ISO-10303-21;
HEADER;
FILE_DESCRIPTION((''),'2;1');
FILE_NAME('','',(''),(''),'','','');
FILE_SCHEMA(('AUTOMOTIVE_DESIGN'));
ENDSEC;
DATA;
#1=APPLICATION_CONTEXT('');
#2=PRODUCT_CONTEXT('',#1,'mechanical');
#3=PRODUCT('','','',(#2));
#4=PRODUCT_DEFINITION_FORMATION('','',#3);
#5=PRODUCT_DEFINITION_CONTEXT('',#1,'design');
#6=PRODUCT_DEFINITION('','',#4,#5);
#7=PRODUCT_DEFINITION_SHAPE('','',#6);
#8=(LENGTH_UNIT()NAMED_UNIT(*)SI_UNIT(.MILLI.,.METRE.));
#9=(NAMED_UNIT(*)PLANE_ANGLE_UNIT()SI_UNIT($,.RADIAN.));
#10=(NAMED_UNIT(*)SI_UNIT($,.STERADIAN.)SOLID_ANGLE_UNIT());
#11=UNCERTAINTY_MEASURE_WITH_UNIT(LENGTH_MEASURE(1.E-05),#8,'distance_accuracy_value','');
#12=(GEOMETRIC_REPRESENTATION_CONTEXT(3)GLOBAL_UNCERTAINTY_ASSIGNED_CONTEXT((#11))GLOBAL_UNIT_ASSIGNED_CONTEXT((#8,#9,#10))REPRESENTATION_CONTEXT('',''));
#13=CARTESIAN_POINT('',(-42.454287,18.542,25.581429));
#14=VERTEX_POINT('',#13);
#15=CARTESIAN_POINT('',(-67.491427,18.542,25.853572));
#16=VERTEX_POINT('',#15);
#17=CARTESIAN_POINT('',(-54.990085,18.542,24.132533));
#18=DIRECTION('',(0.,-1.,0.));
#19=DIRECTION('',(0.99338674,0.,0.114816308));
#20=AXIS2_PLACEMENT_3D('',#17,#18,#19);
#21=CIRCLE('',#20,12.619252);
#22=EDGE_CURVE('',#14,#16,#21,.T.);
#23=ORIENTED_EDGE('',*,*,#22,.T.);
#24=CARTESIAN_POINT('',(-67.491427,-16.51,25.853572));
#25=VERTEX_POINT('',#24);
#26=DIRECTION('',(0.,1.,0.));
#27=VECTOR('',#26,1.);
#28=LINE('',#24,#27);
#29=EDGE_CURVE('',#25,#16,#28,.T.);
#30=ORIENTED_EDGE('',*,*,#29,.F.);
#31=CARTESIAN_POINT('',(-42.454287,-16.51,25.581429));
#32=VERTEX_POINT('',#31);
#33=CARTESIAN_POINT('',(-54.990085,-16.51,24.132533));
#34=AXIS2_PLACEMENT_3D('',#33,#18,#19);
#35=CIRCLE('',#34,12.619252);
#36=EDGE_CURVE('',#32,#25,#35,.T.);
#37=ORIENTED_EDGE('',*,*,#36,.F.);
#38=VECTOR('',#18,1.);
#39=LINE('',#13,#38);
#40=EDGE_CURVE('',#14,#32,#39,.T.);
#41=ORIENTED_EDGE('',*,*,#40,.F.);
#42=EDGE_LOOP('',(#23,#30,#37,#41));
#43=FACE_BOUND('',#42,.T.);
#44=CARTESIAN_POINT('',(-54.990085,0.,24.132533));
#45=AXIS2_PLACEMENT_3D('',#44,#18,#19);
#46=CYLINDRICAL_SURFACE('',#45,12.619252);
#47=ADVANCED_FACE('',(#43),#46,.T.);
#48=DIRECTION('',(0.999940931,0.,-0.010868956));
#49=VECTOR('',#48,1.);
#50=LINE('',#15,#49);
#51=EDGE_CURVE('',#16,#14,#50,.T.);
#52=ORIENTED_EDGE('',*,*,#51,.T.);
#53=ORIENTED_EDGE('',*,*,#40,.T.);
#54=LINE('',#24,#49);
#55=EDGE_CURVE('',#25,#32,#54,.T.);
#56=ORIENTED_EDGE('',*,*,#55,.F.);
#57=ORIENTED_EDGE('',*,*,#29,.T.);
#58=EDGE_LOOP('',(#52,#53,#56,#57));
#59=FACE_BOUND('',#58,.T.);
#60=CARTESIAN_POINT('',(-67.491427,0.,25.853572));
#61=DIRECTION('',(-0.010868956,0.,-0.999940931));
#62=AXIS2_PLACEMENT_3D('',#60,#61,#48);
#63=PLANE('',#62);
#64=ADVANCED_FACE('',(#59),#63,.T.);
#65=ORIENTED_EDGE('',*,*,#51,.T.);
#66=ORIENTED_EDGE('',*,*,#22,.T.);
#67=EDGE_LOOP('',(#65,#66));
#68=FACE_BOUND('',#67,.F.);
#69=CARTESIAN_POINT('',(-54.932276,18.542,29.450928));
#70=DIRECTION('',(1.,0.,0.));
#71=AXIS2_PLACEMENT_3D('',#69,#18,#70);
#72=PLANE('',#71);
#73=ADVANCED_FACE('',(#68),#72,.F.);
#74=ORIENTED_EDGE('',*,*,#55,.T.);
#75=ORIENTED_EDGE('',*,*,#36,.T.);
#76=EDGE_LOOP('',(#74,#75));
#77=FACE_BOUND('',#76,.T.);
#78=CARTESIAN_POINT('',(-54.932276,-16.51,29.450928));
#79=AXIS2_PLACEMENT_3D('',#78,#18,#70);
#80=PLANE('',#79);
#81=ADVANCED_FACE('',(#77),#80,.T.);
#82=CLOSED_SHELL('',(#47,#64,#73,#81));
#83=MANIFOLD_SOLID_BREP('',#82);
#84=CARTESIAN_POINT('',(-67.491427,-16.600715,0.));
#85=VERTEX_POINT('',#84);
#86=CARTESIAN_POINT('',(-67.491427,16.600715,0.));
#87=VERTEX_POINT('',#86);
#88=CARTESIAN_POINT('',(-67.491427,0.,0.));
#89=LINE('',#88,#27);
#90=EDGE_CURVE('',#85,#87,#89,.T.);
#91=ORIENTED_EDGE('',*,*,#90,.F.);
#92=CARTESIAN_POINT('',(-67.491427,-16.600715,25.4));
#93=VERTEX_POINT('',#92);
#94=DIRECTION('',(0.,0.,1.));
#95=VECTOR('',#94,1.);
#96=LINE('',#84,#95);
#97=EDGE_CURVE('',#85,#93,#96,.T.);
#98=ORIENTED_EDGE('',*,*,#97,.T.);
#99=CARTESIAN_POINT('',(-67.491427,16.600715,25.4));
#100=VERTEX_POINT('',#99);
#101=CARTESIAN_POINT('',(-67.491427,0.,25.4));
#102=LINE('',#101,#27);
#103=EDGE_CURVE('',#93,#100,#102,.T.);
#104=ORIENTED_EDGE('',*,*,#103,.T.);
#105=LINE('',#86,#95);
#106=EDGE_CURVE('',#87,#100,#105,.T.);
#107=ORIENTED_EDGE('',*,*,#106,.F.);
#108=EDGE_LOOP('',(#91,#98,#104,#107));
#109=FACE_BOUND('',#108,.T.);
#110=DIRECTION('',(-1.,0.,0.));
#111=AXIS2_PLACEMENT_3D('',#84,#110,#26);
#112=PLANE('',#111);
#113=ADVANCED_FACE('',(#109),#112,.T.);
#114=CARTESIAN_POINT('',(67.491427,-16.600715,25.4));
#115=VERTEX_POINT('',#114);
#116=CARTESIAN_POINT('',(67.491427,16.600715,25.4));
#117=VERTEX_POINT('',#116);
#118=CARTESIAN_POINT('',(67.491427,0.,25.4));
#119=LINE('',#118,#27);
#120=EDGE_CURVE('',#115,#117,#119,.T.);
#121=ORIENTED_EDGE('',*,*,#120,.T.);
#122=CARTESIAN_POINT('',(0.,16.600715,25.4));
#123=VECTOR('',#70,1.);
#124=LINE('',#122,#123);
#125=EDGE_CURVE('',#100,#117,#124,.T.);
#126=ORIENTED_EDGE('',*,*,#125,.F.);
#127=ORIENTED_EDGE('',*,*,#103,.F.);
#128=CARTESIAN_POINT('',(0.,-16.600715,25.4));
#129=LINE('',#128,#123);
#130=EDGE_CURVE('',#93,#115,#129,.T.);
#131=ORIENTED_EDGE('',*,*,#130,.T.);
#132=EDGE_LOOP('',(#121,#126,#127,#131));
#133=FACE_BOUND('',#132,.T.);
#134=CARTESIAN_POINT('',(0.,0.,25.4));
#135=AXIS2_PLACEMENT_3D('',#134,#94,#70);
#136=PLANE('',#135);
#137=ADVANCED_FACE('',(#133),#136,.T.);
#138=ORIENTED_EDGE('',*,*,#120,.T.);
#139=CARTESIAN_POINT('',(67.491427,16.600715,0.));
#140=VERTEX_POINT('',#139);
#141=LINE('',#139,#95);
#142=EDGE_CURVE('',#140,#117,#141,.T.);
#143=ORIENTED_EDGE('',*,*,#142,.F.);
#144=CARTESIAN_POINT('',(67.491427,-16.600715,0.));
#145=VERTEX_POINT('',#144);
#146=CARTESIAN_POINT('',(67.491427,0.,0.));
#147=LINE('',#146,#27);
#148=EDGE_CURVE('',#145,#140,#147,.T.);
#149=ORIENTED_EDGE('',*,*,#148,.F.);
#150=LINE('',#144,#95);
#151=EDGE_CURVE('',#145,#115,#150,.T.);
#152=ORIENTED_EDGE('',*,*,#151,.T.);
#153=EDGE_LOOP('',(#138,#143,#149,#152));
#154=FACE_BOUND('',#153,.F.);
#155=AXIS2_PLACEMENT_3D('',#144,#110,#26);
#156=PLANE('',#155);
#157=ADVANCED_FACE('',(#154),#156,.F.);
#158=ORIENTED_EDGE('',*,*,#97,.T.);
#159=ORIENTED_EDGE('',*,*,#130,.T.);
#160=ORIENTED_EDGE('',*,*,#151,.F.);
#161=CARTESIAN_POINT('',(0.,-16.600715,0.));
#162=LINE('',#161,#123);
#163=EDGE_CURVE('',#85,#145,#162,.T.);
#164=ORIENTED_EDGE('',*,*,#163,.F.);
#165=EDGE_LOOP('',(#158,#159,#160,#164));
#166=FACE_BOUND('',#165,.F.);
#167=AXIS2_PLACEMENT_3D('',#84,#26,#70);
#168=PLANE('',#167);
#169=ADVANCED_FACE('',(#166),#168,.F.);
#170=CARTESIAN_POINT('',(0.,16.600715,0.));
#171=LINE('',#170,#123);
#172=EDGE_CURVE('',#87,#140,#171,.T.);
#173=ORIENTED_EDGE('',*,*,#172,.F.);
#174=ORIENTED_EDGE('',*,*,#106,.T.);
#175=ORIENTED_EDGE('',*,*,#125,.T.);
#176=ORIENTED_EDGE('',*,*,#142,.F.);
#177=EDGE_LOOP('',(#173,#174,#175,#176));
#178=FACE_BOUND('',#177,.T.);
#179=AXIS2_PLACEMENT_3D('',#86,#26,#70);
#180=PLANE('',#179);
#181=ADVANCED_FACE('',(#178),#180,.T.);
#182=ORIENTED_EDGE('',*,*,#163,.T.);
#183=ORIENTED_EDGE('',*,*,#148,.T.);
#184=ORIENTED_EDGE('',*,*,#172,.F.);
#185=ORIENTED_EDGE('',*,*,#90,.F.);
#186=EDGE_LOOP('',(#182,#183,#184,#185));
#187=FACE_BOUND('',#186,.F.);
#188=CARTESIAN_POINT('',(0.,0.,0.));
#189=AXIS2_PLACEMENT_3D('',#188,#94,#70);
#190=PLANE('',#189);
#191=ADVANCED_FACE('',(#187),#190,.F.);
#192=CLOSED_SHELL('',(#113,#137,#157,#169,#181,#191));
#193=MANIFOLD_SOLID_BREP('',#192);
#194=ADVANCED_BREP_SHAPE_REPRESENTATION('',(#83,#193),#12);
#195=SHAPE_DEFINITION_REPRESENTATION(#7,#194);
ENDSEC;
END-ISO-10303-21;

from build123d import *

# Parameters (mm, degrees)
F0_W     = 134.9828541279
F0_H     = 33.2014299929
F1_DEPTH = 25.4
F3_DEPTH = 16.51
F4_DEPTH = 18.542


# Not quite as in the source:
# - a feature of the source that left no trace in its solid (it failed there, or was rolled back) is left out


with BuildPart() as f1:
    # F0 (on Top) → F1 (new body)
    with BuildSketch(Plane.XY):
        Rectangle(F0_W, F0_H)
    extrude(amount=F1_DEPTH)


with BuildPart() as f3:
    # F2 (on Front) → F3 (new body)
    with BuildSketch(Plane.XZ):
        with BuildLine():
            Line((-67.4914270639, 25.8535724133), (-42.4542874098, 25.5814287812))
            ThreePointArc((-42.4542874098, 25.5814287812), (-54.8529271081, 36.7510396112), (-67.4914270639, 25.8535724133))
        make_face()
    extrude(amount=F3_DEPTH)

    # F4 (add): a face of the model
    f4_faces = [f3.faces().sort_by_distance(p)[0] for p in [
        (-54.9224588706, 0, 30.3541364957),
    ]]
    extrude(f4_faces, amount=F4_DEPTH)


solid = Compound([f1.part, f3.part])
